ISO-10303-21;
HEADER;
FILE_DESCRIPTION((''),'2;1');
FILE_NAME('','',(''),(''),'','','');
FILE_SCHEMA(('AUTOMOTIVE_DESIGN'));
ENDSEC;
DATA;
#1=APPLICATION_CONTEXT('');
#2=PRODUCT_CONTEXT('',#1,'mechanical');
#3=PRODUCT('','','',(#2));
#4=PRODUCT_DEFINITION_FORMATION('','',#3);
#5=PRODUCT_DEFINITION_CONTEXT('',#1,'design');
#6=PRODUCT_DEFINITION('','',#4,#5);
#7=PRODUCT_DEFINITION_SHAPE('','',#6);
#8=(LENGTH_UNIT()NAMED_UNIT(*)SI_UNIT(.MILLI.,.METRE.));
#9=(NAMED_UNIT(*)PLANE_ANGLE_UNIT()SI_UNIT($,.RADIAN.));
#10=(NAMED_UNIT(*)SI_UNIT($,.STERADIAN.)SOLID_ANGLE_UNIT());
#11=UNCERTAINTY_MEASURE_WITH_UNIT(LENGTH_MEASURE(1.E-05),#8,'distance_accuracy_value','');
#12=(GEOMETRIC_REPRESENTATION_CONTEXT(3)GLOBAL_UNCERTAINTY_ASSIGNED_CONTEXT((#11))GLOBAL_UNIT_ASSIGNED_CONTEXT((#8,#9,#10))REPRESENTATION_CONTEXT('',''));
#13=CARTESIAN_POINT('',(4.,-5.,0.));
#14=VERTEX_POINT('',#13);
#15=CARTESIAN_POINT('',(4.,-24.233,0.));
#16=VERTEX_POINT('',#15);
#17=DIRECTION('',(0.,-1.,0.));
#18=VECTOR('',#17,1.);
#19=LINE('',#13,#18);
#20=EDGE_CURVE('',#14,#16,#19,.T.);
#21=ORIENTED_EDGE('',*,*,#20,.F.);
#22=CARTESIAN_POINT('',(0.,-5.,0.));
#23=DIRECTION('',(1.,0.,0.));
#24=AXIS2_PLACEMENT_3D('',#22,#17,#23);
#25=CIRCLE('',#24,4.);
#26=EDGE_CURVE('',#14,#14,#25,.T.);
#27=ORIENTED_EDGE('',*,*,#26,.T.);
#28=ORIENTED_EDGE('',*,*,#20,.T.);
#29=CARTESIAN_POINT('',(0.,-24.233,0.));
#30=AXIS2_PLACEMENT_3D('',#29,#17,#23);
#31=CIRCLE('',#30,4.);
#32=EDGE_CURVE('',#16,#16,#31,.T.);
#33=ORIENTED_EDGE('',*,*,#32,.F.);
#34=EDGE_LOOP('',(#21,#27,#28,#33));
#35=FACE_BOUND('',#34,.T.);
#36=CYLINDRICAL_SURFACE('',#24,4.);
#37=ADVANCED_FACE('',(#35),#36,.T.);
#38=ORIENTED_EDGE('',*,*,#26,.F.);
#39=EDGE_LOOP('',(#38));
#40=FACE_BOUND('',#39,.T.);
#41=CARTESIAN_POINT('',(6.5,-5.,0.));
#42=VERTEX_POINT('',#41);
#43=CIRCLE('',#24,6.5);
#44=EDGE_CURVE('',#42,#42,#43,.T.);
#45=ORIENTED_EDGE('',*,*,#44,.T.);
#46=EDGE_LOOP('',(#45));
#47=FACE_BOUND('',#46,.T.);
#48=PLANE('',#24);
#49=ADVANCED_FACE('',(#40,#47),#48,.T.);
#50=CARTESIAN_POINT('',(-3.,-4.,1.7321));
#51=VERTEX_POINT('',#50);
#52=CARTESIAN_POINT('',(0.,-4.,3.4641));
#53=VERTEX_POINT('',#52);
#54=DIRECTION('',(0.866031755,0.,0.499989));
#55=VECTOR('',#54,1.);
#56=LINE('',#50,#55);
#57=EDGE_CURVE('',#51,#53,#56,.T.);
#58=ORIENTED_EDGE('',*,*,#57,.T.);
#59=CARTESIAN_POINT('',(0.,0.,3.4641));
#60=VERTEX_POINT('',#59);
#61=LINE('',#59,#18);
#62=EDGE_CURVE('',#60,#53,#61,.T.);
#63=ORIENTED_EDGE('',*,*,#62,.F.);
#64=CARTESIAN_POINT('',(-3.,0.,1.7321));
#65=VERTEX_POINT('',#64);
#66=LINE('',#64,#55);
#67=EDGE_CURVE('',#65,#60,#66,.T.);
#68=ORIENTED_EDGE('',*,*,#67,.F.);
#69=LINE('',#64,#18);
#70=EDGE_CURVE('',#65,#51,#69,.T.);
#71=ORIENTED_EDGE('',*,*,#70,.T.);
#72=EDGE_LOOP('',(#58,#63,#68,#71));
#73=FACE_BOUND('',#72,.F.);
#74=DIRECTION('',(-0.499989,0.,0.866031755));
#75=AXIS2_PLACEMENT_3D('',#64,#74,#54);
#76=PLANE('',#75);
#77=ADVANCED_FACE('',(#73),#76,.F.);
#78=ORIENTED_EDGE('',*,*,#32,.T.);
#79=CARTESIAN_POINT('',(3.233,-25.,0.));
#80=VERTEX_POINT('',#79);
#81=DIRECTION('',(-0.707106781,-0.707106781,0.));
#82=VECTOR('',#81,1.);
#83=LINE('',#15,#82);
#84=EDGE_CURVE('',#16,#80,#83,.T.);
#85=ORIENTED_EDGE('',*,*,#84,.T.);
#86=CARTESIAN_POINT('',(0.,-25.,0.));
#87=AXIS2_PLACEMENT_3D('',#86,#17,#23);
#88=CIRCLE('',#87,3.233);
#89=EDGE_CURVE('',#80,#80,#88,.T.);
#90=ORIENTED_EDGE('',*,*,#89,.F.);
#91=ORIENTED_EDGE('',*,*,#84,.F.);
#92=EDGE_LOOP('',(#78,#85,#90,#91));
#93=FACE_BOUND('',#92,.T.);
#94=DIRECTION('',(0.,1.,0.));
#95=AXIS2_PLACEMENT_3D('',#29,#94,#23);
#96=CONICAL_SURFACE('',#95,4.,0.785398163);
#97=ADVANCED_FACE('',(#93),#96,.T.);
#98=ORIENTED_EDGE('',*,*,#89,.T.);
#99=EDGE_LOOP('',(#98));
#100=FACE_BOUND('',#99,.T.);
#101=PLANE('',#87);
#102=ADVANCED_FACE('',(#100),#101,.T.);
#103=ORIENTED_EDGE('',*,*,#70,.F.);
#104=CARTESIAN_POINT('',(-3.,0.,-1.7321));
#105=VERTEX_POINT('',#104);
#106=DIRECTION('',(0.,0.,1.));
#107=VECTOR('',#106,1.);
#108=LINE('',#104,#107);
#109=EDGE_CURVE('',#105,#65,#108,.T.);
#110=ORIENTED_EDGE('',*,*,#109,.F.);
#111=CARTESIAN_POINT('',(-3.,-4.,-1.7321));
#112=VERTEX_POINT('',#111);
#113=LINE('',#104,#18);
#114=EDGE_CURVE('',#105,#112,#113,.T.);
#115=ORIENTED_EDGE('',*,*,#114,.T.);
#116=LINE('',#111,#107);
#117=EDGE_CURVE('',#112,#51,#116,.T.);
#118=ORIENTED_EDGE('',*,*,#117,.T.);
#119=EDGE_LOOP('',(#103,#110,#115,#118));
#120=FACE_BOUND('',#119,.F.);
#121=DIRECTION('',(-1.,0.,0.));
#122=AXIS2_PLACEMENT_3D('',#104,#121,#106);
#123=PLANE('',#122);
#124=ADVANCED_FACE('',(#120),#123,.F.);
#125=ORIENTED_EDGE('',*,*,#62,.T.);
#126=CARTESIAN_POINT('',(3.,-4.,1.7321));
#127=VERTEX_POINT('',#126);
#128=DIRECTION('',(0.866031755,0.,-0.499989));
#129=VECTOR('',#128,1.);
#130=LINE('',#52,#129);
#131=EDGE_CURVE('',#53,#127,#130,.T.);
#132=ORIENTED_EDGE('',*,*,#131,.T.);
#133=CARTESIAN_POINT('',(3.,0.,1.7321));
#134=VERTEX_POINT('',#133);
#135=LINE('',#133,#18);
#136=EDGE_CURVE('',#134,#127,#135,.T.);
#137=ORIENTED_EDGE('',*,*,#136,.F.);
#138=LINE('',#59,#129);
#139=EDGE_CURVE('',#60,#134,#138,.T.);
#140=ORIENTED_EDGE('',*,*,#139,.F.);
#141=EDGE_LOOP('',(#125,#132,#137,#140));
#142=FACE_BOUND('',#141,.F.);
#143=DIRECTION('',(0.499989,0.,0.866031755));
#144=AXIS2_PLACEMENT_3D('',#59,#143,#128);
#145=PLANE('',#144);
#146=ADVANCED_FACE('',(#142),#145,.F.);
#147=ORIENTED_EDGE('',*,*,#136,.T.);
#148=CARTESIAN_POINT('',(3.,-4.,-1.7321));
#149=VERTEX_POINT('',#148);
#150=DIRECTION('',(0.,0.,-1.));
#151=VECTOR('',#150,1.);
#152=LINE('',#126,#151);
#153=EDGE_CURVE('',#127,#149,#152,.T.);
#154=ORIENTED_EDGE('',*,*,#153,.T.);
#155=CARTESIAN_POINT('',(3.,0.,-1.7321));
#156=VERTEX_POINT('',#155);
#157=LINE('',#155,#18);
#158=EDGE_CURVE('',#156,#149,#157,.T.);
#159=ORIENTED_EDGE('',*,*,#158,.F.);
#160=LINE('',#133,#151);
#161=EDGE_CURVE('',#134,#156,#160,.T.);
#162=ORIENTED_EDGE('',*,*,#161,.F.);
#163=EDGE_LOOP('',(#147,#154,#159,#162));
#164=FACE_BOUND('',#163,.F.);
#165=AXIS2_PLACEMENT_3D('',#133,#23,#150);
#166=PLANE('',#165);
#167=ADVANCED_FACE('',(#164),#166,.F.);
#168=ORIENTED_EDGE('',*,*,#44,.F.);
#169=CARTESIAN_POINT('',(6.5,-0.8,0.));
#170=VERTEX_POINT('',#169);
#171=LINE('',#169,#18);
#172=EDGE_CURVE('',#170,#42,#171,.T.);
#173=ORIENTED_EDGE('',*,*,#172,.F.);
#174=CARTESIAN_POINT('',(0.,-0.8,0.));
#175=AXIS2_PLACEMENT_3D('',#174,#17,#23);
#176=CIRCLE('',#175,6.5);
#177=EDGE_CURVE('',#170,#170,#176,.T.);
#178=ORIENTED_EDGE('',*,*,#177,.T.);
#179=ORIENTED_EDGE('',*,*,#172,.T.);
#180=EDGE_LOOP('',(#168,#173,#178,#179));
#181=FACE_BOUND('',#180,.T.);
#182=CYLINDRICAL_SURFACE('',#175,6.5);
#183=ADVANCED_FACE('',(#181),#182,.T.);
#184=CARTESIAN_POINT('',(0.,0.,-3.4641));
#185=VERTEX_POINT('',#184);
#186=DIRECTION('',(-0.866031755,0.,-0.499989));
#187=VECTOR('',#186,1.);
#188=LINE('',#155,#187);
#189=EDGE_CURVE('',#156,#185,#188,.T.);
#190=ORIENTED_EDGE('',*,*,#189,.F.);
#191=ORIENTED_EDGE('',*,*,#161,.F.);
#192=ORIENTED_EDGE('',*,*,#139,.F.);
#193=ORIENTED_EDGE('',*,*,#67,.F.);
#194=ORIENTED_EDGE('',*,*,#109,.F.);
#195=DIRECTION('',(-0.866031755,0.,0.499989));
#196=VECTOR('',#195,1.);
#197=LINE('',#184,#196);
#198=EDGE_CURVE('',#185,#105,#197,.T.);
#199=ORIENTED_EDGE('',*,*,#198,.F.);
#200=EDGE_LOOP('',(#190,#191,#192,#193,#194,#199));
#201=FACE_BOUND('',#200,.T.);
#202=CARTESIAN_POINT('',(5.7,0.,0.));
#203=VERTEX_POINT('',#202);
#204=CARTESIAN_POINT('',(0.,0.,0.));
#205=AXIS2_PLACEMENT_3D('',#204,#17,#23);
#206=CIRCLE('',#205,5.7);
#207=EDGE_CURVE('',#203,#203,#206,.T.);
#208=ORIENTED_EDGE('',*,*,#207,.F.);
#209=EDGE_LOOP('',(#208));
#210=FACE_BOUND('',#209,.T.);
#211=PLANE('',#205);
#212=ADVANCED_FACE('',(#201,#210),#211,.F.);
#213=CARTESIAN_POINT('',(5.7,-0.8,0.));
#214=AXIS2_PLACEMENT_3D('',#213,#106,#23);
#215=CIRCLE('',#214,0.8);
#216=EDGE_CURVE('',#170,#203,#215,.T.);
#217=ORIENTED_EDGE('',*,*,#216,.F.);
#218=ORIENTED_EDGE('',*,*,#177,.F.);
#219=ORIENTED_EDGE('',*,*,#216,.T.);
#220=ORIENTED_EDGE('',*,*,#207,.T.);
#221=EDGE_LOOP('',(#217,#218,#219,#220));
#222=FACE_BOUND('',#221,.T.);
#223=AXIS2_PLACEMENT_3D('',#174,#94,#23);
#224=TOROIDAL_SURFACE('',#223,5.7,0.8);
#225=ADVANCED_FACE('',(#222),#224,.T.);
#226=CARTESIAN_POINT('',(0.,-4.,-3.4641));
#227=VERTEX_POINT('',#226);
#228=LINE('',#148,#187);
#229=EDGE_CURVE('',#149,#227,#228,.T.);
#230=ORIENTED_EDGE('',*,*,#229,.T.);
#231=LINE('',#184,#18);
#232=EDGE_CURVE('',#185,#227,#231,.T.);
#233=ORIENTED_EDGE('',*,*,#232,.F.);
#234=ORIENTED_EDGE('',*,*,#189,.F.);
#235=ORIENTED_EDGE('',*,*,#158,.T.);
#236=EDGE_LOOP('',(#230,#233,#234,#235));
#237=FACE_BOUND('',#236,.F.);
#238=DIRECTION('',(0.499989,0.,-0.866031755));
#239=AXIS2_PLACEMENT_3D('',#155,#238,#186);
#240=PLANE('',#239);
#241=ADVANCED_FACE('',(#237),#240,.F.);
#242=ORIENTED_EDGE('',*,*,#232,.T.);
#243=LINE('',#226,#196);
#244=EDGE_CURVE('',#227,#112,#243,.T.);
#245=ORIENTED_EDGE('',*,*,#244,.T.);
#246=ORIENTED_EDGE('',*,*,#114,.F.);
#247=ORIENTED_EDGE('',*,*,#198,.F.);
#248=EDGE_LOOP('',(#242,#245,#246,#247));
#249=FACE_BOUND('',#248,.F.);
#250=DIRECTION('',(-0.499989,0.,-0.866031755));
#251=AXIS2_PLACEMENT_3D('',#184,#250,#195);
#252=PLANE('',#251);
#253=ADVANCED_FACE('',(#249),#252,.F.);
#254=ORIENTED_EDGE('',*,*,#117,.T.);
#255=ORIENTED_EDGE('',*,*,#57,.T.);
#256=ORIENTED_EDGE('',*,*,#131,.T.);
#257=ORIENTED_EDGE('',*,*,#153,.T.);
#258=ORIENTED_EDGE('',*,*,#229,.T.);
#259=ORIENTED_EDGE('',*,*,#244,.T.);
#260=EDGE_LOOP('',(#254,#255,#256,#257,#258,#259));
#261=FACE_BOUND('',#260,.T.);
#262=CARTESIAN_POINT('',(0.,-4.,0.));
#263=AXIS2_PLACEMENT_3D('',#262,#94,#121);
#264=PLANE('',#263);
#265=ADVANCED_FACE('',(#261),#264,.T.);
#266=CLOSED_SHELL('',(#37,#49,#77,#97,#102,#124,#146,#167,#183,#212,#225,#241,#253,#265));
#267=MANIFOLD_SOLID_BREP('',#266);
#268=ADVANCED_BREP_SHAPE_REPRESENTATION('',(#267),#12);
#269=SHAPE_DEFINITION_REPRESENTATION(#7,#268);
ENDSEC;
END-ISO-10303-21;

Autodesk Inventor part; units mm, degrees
sketch "Sketch_1" plane through (0, 0, 0) normal (0, 0, 1) x (1, 0, 0)
  line L0 (0, -50) -> (0, 50)
  line L1 (0, 0) -> (5.7, 0)
  arc A0 (6.5, -0.8) -> (5.7, 0) centre (5.7, -0.8) ccw
  line L2 (6.5, -0.8) -> (6.5, -5)
  line L3 (6.5, -5) -> (4, -5)
  line L4 (4, -5) -> (4, -24.233)
  line L5 (4, -24.233) -> (3.233, -25)
  line L6 (3.233, -25) -> (0, -25)
  line L7 (0, -25) -> (0, 0)
revolve "Revolution1" add sketch "Sketch_1" angle 360 about axis through (0, -50, 0) along (0, -1, 0)
thread "Thread1" size "M8x1.25" class "6g" standard "ISO Metric profile" length 12.233
sketch "Sketch_2" plane through (0, 0, 0) normal (0, 1, 0) x (-1, 0, 0)
  line L0 (3, 1.7321) -> (0, 3.4641)
  line L1 (0, 3.4641) -> (-3, 1.7321)
  line L2 (-3, 1.7321) -> (-3, -1.7321)
  line L3 (-3, -1.7321) -> (0, -3.4641)
  line L4 (0, -3.4641) -> (3, -1.7321)
  line L5 (3, -1.7321) -> (3, 1.7321)
extrude "Extrusion1" cut sketch "Sketch_2" against normal blind 4
ref_plane "p1_XY" through (0, -5, 0) normal (0, -1, 0) x (1, 0, 0)
ref_plane "p1_YZ" through (0, -5, 0) normal (1, 0, 0) x (0, 0, 1)
ref_plane "p1_ZX" through (0, -5, 0) normal (0, 0, 1) x (0, -1, 0)
properties part number "Zylinderschraube DIN 6912 M8x20"
